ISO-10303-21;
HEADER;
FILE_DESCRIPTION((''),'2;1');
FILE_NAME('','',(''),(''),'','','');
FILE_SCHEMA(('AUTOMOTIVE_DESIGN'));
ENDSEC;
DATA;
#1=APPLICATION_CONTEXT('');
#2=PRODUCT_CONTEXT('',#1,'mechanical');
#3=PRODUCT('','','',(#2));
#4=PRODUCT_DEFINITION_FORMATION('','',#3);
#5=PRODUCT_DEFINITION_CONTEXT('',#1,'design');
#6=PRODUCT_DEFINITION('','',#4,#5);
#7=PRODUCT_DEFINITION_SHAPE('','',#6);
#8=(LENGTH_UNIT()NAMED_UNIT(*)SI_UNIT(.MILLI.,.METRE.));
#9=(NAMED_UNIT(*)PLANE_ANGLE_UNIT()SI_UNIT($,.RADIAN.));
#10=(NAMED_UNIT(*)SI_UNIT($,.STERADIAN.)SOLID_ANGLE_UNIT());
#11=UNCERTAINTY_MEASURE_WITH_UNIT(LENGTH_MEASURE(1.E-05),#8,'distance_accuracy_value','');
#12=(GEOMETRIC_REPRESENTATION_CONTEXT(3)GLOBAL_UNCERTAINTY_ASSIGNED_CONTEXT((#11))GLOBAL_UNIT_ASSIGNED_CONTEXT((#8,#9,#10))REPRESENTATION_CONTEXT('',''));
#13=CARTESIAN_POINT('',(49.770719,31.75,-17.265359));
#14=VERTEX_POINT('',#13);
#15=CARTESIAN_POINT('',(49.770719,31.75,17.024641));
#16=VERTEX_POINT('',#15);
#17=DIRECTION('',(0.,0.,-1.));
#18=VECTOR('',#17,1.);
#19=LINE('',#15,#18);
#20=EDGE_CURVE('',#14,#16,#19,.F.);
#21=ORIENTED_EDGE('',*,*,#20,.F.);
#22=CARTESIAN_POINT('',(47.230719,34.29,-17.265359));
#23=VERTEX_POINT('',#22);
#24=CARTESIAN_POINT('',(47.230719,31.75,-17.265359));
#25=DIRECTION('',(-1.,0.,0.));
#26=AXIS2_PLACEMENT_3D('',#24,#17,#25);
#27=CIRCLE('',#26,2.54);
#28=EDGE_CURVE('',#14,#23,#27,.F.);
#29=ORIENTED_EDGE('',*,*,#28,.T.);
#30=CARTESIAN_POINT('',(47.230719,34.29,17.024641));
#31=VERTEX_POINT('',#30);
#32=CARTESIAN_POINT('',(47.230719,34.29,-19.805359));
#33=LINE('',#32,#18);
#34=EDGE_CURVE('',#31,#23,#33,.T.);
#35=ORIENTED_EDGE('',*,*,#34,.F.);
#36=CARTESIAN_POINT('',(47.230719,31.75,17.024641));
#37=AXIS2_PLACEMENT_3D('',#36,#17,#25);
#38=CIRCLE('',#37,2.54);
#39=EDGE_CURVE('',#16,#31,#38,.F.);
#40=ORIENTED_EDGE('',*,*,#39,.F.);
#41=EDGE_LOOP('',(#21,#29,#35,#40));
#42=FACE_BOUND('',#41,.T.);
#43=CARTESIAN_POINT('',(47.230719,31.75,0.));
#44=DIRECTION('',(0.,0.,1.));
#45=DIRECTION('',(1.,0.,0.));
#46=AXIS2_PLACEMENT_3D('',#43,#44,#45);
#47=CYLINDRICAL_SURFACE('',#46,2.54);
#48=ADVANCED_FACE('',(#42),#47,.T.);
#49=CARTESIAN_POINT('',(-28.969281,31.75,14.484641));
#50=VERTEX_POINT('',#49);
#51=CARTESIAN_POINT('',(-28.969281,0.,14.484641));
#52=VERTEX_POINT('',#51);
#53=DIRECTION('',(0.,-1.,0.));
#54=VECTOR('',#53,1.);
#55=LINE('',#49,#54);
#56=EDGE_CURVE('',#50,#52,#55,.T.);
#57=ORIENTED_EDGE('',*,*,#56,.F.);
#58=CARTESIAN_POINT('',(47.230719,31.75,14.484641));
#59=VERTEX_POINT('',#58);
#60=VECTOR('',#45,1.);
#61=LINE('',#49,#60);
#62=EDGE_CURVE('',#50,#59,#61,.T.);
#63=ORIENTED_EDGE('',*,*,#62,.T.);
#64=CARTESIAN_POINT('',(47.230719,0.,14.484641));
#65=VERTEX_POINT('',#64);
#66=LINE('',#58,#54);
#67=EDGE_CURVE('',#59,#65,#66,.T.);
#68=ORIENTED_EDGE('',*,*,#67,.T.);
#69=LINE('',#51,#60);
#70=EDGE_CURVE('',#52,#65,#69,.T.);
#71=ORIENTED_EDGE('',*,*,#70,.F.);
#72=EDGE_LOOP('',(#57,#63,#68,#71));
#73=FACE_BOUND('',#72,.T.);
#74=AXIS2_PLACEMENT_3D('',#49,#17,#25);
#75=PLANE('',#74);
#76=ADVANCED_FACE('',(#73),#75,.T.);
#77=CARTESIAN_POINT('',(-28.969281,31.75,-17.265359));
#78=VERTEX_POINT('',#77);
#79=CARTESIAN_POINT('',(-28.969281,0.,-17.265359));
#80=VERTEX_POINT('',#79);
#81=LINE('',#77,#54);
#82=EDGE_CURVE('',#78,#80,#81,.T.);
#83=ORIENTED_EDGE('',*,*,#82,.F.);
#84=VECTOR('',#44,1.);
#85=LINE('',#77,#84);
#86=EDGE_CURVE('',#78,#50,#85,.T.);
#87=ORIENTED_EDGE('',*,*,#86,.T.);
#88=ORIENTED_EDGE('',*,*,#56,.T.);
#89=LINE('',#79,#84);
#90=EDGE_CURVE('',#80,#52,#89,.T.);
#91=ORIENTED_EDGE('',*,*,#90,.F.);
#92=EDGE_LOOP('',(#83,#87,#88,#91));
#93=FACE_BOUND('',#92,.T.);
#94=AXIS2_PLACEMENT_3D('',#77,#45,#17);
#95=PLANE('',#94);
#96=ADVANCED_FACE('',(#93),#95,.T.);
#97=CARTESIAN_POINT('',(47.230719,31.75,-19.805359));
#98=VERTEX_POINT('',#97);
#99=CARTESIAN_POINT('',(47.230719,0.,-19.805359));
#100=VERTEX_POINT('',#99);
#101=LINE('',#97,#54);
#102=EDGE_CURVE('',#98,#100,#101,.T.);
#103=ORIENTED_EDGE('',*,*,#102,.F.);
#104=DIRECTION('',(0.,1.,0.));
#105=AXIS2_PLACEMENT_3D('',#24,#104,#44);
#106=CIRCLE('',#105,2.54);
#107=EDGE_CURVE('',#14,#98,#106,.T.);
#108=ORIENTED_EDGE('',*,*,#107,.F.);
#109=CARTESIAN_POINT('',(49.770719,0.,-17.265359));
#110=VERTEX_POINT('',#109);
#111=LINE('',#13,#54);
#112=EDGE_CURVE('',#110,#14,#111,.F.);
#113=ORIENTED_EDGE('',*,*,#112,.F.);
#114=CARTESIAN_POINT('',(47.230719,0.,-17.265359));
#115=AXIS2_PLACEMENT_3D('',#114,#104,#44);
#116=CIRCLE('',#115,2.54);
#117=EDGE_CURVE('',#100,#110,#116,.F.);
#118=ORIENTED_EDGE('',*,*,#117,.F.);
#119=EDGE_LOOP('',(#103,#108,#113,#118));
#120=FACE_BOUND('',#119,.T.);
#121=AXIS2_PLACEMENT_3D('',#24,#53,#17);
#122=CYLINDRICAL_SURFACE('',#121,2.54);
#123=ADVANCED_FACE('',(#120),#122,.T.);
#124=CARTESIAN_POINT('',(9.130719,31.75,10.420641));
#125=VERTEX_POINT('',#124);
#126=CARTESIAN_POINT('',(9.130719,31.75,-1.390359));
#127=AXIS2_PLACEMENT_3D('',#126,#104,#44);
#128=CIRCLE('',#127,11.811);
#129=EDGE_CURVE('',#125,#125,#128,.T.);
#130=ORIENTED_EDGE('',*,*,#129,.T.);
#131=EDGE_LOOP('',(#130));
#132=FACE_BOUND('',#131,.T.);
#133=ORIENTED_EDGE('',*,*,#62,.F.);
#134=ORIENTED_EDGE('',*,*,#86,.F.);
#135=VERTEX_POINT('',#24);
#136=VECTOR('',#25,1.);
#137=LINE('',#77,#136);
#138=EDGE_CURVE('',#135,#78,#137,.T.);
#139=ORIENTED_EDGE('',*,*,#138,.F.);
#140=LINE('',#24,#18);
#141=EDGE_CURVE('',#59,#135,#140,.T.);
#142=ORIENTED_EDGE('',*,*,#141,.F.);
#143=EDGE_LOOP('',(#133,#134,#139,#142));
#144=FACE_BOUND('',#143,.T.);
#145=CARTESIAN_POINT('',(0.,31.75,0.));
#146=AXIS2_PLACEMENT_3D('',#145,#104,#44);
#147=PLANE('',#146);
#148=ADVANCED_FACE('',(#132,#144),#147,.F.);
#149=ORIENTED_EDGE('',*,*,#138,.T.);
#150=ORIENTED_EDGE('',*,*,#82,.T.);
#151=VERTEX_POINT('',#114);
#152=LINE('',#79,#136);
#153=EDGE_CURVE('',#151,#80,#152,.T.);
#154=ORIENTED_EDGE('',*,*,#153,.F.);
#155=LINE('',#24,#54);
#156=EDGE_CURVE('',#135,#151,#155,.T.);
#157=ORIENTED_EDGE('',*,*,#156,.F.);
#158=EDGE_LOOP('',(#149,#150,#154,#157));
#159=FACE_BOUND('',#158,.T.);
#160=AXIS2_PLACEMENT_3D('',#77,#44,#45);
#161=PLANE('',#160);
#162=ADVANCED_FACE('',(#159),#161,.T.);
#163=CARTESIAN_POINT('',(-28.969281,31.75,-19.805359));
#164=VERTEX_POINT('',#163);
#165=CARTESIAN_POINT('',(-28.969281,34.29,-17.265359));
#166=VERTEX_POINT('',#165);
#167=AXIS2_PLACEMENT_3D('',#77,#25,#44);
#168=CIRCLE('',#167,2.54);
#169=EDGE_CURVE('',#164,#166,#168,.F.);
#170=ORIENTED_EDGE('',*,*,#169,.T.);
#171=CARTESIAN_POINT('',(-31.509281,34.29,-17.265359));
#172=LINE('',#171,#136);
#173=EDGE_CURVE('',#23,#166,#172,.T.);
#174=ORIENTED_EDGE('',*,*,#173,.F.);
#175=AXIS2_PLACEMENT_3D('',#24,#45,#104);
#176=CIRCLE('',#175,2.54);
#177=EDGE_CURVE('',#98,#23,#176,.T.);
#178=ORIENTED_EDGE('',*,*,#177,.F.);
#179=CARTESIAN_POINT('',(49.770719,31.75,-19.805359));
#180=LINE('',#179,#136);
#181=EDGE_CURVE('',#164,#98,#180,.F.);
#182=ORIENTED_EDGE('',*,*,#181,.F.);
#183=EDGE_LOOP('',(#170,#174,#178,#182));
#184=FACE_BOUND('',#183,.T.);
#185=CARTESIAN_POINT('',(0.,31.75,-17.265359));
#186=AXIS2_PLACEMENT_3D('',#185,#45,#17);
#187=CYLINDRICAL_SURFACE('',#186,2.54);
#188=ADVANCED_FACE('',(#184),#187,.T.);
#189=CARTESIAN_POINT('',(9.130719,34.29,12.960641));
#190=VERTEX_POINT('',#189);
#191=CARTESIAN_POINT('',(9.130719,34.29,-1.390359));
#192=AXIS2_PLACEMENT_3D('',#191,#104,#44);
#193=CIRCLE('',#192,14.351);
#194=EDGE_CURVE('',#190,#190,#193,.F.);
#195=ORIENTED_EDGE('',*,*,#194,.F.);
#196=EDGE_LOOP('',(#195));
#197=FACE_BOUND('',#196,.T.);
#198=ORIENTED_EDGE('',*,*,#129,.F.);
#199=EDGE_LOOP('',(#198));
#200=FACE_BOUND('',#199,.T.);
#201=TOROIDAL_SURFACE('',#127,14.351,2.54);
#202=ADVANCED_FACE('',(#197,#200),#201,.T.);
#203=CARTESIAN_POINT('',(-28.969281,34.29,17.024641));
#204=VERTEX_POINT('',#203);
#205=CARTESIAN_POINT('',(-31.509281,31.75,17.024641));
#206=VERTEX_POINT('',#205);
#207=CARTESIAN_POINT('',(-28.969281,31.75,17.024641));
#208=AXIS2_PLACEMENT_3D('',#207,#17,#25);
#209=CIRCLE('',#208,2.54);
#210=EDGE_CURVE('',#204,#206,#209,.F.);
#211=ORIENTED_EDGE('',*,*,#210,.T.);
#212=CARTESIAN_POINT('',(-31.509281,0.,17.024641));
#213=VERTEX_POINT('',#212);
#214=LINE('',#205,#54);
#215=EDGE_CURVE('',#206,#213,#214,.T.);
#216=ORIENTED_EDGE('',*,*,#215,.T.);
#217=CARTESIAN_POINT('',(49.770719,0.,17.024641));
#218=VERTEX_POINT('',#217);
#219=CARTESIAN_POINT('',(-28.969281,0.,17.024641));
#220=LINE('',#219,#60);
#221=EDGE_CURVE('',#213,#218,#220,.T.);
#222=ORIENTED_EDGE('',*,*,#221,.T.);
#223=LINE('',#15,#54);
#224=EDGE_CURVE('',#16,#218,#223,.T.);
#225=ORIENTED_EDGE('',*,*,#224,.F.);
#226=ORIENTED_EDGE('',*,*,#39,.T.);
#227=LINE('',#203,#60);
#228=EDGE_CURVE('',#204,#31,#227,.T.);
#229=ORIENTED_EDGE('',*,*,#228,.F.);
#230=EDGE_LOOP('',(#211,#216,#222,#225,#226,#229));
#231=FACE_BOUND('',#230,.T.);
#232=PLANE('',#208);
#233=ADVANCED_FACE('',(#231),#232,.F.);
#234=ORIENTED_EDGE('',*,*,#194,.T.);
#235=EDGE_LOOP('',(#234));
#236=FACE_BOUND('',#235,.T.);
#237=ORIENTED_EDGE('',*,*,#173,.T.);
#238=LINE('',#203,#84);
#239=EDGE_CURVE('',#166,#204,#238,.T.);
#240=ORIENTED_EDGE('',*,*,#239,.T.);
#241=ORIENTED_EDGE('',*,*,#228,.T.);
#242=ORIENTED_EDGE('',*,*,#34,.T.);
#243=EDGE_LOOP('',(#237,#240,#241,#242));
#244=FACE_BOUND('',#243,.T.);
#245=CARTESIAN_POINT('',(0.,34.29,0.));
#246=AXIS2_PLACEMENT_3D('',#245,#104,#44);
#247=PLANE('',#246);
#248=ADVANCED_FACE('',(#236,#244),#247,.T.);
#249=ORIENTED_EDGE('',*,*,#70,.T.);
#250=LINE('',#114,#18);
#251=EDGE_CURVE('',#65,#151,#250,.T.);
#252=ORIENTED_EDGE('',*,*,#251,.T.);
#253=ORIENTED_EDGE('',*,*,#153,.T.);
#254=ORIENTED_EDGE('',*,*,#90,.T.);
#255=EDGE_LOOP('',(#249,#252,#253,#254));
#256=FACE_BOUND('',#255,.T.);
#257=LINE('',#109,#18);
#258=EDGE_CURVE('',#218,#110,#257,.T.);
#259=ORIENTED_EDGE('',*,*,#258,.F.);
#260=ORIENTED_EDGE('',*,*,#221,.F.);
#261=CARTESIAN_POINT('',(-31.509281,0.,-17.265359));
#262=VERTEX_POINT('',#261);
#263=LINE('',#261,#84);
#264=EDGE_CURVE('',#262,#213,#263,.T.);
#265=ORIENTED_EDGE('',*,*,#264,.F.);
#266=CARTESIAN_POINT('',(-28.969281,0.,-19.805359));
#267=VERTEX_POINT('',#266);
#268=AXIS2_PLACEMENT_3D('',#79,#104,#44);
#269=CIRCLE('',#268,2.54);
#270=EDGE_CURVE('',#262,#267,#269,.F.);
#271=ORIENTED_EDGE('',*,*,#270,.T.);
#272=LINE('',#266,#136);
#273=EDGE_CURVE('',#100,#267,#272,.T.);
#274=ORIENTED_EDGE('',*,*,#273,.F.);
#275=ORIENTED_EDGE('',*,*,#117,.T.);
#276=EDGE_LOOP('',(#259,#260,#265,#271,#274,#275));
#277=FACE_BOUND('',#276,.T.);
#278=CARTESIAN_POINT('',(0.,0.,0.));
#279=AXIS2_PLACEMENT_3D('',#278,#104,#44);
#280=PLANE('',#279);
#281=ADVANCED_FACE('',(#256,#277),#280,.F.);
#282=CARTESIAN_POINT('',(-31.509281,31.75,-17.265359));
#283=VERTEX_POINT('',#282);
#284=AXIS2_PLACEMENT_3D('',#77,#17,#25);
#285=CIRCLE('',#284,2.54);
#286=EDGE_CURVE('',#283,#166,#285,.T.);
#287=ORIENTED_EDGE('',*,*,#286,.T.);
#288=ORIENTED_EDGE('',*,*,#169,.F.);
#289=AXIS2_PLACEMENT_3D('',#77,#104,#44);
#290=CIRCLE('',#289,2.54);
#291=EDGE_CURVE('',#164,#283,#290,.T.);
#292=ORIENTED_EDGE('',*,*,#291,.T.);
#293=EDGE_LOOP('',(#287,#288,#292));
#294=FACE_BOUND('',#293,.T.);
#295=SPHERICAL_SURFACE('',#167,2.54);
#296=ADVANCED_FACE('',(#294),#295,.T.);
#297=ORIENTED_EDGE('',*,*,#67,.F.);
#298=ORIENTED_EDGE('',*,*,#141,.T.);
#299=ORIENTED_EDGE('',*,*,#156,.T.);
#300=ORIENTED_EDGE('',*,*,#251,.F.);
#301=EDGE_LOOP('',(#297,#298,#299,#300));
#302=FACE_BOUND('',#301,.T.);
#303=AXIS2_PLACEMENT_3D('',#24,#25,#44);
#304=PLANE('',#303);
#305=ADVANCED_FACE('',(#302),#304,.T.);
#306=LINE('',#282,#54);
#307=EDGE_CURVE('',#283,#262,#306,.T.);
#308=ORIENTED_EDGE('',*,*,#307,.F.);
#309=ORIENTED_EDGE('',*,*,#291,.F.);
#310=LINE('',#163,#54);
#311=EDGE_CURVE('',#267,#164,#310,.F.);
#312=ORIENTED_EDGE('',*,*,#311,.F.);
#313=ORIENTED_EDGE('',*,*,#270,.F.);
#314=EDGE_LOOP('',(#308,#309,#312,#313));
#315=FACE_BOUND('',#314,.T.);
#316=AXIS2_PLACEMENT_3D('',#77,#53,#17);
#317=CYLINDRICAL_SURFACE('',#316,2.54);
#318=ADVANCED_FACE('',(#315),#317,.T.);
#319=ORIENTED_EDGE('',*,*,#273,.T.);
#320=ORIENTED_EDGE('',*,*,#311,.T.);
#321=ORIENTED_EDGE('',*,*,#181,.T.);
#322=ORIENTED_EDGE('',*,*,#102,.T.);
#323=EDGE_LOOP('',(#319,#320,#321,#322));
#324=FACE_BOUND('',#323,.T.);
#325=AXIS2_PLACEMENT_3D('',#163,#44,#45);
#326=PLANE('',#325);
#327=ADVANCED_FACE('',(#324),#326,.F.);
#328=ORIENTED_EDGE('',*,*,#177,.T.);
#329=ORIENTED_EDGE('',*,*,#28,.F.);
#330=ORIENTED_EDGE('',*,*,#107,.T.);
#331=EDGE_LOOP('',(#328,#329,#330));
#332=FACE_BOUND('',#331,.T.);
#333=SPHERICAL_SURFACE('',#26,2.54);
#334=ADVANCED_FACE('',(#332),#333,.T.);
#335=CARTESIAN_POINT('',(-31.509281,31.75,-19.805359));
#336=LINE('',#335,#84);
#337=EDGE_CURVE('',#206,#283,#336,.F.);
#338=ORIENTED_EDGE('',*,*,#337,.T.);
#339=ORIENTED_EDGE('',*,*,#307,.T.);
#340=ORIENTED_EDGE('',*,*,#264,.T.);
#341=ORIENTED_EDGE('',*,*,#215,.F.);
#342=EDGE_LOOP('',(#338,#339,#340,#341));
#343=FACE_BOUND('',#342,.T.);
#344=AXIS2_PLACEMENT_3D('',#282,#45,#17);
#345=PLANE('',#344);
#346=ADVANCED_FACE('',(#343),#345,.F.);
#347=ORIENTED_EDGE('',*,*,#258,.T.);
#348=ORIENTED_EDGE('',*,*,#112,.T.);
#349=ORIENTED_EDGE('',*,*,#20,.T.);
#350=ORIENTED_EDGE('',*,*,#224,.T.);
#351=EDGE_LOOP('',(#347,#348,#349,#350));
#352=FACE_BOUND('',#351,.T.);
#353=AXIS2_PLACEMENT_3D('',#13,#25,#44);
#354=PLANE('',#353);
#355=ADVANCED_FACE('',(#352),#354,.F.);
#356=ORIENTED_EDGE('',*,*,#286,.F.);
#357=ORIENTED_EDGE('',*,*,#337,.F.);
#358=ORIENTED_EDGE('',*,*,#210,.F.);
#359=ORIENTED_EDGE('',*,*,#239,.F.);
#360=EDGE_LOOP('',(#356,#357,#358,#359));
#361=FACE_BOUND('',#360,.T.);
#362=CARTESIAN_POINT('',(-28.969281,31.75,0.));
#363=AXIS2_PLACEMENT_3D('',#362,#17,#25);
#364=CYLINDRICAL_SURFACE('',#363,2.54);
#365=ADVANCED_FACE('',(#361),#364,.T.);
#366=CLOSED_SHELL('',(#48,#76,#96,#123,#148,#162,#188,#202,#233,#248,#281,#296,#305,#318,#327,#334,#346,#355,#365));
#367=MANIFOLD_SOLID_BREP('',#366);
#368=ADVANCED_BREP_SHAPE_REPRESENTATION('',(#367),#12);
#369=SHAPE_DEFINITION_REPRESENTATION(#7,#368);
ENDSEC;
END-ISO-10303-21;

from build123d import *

# Parameters (mm, degrees)
SKETCH1_W           = 76.2
SKETCH1_H           = 31.75
BOSS_EXTRUDE1_DEPTH = 31.75
SHELL4_T            = 2.54
CUT_EXTRUDE5_START  = 34.29
SKETCH2_R           = 11.811
CUT_EXTRUDE5_DEPTH  = 12.7
FILLET3_R           = 2.54


with BuildPart() as part:
    # Sketch1 → Boss-Extrude1 (new body)
    with BuildSketch(Plane(origin=(0, 0, 0), x_dir=(1, 0, 0), z_dir=(0, 1, 0))):
        with Locations((9.130718954, 1.390359477)):
            Rectangle(SKETCH1_W, SKETCH1_H)
    extrude(amount=BOSS_EXTRUDE1_DEPTH)

    # Shell4
    shell4_openings = [part.faces().sort_by_distance(p)[0] for p in [
        (9.130718954, 0, -1.390359477),
    ]]
    offset(amount=SHELL4_T, openings=shell4_openings, kind=Kind.INTERSECTION)

    # Sketch2 → Cut-Extrude5 (cut, symmetric)
    with BuildSketch(Plane(origin=(0, 0, 0), x_dir=(1, 0, 0), z_dir=(0, 1, 0)).offset(CUT_EXTRUDE5_START)):
        with Locations(Location((9.130718954, 1.390359477, 0), (0, 0, 270))):
            Circle(SKETCH2_R)
    extrude(amount=CUT_EXTRUDE5_DEPTH, both=True, mode=Mode.SUBTRACT)

    # Fillet3
    fillet3_edges = [part.edges().sort_by_distance(p)[0] for p in [
        (49.770718954, 34.29, -1.390359477),
        (9.130718954, 34.29, -19.805359477),
        (9.130718954, 34.29, -13.201359477),
        (-31.509281046, 34.29, -1.390359477),
        (-31.509281046, 17.145, -19.805359477),
        (49.770718954, 17.145, -19.805359477),
    ]]
    fillet(fillet3_edges, radius=FILLET3_R - 0.0001)  # a hair under: the kernel refuses the full size


solid = part.part
